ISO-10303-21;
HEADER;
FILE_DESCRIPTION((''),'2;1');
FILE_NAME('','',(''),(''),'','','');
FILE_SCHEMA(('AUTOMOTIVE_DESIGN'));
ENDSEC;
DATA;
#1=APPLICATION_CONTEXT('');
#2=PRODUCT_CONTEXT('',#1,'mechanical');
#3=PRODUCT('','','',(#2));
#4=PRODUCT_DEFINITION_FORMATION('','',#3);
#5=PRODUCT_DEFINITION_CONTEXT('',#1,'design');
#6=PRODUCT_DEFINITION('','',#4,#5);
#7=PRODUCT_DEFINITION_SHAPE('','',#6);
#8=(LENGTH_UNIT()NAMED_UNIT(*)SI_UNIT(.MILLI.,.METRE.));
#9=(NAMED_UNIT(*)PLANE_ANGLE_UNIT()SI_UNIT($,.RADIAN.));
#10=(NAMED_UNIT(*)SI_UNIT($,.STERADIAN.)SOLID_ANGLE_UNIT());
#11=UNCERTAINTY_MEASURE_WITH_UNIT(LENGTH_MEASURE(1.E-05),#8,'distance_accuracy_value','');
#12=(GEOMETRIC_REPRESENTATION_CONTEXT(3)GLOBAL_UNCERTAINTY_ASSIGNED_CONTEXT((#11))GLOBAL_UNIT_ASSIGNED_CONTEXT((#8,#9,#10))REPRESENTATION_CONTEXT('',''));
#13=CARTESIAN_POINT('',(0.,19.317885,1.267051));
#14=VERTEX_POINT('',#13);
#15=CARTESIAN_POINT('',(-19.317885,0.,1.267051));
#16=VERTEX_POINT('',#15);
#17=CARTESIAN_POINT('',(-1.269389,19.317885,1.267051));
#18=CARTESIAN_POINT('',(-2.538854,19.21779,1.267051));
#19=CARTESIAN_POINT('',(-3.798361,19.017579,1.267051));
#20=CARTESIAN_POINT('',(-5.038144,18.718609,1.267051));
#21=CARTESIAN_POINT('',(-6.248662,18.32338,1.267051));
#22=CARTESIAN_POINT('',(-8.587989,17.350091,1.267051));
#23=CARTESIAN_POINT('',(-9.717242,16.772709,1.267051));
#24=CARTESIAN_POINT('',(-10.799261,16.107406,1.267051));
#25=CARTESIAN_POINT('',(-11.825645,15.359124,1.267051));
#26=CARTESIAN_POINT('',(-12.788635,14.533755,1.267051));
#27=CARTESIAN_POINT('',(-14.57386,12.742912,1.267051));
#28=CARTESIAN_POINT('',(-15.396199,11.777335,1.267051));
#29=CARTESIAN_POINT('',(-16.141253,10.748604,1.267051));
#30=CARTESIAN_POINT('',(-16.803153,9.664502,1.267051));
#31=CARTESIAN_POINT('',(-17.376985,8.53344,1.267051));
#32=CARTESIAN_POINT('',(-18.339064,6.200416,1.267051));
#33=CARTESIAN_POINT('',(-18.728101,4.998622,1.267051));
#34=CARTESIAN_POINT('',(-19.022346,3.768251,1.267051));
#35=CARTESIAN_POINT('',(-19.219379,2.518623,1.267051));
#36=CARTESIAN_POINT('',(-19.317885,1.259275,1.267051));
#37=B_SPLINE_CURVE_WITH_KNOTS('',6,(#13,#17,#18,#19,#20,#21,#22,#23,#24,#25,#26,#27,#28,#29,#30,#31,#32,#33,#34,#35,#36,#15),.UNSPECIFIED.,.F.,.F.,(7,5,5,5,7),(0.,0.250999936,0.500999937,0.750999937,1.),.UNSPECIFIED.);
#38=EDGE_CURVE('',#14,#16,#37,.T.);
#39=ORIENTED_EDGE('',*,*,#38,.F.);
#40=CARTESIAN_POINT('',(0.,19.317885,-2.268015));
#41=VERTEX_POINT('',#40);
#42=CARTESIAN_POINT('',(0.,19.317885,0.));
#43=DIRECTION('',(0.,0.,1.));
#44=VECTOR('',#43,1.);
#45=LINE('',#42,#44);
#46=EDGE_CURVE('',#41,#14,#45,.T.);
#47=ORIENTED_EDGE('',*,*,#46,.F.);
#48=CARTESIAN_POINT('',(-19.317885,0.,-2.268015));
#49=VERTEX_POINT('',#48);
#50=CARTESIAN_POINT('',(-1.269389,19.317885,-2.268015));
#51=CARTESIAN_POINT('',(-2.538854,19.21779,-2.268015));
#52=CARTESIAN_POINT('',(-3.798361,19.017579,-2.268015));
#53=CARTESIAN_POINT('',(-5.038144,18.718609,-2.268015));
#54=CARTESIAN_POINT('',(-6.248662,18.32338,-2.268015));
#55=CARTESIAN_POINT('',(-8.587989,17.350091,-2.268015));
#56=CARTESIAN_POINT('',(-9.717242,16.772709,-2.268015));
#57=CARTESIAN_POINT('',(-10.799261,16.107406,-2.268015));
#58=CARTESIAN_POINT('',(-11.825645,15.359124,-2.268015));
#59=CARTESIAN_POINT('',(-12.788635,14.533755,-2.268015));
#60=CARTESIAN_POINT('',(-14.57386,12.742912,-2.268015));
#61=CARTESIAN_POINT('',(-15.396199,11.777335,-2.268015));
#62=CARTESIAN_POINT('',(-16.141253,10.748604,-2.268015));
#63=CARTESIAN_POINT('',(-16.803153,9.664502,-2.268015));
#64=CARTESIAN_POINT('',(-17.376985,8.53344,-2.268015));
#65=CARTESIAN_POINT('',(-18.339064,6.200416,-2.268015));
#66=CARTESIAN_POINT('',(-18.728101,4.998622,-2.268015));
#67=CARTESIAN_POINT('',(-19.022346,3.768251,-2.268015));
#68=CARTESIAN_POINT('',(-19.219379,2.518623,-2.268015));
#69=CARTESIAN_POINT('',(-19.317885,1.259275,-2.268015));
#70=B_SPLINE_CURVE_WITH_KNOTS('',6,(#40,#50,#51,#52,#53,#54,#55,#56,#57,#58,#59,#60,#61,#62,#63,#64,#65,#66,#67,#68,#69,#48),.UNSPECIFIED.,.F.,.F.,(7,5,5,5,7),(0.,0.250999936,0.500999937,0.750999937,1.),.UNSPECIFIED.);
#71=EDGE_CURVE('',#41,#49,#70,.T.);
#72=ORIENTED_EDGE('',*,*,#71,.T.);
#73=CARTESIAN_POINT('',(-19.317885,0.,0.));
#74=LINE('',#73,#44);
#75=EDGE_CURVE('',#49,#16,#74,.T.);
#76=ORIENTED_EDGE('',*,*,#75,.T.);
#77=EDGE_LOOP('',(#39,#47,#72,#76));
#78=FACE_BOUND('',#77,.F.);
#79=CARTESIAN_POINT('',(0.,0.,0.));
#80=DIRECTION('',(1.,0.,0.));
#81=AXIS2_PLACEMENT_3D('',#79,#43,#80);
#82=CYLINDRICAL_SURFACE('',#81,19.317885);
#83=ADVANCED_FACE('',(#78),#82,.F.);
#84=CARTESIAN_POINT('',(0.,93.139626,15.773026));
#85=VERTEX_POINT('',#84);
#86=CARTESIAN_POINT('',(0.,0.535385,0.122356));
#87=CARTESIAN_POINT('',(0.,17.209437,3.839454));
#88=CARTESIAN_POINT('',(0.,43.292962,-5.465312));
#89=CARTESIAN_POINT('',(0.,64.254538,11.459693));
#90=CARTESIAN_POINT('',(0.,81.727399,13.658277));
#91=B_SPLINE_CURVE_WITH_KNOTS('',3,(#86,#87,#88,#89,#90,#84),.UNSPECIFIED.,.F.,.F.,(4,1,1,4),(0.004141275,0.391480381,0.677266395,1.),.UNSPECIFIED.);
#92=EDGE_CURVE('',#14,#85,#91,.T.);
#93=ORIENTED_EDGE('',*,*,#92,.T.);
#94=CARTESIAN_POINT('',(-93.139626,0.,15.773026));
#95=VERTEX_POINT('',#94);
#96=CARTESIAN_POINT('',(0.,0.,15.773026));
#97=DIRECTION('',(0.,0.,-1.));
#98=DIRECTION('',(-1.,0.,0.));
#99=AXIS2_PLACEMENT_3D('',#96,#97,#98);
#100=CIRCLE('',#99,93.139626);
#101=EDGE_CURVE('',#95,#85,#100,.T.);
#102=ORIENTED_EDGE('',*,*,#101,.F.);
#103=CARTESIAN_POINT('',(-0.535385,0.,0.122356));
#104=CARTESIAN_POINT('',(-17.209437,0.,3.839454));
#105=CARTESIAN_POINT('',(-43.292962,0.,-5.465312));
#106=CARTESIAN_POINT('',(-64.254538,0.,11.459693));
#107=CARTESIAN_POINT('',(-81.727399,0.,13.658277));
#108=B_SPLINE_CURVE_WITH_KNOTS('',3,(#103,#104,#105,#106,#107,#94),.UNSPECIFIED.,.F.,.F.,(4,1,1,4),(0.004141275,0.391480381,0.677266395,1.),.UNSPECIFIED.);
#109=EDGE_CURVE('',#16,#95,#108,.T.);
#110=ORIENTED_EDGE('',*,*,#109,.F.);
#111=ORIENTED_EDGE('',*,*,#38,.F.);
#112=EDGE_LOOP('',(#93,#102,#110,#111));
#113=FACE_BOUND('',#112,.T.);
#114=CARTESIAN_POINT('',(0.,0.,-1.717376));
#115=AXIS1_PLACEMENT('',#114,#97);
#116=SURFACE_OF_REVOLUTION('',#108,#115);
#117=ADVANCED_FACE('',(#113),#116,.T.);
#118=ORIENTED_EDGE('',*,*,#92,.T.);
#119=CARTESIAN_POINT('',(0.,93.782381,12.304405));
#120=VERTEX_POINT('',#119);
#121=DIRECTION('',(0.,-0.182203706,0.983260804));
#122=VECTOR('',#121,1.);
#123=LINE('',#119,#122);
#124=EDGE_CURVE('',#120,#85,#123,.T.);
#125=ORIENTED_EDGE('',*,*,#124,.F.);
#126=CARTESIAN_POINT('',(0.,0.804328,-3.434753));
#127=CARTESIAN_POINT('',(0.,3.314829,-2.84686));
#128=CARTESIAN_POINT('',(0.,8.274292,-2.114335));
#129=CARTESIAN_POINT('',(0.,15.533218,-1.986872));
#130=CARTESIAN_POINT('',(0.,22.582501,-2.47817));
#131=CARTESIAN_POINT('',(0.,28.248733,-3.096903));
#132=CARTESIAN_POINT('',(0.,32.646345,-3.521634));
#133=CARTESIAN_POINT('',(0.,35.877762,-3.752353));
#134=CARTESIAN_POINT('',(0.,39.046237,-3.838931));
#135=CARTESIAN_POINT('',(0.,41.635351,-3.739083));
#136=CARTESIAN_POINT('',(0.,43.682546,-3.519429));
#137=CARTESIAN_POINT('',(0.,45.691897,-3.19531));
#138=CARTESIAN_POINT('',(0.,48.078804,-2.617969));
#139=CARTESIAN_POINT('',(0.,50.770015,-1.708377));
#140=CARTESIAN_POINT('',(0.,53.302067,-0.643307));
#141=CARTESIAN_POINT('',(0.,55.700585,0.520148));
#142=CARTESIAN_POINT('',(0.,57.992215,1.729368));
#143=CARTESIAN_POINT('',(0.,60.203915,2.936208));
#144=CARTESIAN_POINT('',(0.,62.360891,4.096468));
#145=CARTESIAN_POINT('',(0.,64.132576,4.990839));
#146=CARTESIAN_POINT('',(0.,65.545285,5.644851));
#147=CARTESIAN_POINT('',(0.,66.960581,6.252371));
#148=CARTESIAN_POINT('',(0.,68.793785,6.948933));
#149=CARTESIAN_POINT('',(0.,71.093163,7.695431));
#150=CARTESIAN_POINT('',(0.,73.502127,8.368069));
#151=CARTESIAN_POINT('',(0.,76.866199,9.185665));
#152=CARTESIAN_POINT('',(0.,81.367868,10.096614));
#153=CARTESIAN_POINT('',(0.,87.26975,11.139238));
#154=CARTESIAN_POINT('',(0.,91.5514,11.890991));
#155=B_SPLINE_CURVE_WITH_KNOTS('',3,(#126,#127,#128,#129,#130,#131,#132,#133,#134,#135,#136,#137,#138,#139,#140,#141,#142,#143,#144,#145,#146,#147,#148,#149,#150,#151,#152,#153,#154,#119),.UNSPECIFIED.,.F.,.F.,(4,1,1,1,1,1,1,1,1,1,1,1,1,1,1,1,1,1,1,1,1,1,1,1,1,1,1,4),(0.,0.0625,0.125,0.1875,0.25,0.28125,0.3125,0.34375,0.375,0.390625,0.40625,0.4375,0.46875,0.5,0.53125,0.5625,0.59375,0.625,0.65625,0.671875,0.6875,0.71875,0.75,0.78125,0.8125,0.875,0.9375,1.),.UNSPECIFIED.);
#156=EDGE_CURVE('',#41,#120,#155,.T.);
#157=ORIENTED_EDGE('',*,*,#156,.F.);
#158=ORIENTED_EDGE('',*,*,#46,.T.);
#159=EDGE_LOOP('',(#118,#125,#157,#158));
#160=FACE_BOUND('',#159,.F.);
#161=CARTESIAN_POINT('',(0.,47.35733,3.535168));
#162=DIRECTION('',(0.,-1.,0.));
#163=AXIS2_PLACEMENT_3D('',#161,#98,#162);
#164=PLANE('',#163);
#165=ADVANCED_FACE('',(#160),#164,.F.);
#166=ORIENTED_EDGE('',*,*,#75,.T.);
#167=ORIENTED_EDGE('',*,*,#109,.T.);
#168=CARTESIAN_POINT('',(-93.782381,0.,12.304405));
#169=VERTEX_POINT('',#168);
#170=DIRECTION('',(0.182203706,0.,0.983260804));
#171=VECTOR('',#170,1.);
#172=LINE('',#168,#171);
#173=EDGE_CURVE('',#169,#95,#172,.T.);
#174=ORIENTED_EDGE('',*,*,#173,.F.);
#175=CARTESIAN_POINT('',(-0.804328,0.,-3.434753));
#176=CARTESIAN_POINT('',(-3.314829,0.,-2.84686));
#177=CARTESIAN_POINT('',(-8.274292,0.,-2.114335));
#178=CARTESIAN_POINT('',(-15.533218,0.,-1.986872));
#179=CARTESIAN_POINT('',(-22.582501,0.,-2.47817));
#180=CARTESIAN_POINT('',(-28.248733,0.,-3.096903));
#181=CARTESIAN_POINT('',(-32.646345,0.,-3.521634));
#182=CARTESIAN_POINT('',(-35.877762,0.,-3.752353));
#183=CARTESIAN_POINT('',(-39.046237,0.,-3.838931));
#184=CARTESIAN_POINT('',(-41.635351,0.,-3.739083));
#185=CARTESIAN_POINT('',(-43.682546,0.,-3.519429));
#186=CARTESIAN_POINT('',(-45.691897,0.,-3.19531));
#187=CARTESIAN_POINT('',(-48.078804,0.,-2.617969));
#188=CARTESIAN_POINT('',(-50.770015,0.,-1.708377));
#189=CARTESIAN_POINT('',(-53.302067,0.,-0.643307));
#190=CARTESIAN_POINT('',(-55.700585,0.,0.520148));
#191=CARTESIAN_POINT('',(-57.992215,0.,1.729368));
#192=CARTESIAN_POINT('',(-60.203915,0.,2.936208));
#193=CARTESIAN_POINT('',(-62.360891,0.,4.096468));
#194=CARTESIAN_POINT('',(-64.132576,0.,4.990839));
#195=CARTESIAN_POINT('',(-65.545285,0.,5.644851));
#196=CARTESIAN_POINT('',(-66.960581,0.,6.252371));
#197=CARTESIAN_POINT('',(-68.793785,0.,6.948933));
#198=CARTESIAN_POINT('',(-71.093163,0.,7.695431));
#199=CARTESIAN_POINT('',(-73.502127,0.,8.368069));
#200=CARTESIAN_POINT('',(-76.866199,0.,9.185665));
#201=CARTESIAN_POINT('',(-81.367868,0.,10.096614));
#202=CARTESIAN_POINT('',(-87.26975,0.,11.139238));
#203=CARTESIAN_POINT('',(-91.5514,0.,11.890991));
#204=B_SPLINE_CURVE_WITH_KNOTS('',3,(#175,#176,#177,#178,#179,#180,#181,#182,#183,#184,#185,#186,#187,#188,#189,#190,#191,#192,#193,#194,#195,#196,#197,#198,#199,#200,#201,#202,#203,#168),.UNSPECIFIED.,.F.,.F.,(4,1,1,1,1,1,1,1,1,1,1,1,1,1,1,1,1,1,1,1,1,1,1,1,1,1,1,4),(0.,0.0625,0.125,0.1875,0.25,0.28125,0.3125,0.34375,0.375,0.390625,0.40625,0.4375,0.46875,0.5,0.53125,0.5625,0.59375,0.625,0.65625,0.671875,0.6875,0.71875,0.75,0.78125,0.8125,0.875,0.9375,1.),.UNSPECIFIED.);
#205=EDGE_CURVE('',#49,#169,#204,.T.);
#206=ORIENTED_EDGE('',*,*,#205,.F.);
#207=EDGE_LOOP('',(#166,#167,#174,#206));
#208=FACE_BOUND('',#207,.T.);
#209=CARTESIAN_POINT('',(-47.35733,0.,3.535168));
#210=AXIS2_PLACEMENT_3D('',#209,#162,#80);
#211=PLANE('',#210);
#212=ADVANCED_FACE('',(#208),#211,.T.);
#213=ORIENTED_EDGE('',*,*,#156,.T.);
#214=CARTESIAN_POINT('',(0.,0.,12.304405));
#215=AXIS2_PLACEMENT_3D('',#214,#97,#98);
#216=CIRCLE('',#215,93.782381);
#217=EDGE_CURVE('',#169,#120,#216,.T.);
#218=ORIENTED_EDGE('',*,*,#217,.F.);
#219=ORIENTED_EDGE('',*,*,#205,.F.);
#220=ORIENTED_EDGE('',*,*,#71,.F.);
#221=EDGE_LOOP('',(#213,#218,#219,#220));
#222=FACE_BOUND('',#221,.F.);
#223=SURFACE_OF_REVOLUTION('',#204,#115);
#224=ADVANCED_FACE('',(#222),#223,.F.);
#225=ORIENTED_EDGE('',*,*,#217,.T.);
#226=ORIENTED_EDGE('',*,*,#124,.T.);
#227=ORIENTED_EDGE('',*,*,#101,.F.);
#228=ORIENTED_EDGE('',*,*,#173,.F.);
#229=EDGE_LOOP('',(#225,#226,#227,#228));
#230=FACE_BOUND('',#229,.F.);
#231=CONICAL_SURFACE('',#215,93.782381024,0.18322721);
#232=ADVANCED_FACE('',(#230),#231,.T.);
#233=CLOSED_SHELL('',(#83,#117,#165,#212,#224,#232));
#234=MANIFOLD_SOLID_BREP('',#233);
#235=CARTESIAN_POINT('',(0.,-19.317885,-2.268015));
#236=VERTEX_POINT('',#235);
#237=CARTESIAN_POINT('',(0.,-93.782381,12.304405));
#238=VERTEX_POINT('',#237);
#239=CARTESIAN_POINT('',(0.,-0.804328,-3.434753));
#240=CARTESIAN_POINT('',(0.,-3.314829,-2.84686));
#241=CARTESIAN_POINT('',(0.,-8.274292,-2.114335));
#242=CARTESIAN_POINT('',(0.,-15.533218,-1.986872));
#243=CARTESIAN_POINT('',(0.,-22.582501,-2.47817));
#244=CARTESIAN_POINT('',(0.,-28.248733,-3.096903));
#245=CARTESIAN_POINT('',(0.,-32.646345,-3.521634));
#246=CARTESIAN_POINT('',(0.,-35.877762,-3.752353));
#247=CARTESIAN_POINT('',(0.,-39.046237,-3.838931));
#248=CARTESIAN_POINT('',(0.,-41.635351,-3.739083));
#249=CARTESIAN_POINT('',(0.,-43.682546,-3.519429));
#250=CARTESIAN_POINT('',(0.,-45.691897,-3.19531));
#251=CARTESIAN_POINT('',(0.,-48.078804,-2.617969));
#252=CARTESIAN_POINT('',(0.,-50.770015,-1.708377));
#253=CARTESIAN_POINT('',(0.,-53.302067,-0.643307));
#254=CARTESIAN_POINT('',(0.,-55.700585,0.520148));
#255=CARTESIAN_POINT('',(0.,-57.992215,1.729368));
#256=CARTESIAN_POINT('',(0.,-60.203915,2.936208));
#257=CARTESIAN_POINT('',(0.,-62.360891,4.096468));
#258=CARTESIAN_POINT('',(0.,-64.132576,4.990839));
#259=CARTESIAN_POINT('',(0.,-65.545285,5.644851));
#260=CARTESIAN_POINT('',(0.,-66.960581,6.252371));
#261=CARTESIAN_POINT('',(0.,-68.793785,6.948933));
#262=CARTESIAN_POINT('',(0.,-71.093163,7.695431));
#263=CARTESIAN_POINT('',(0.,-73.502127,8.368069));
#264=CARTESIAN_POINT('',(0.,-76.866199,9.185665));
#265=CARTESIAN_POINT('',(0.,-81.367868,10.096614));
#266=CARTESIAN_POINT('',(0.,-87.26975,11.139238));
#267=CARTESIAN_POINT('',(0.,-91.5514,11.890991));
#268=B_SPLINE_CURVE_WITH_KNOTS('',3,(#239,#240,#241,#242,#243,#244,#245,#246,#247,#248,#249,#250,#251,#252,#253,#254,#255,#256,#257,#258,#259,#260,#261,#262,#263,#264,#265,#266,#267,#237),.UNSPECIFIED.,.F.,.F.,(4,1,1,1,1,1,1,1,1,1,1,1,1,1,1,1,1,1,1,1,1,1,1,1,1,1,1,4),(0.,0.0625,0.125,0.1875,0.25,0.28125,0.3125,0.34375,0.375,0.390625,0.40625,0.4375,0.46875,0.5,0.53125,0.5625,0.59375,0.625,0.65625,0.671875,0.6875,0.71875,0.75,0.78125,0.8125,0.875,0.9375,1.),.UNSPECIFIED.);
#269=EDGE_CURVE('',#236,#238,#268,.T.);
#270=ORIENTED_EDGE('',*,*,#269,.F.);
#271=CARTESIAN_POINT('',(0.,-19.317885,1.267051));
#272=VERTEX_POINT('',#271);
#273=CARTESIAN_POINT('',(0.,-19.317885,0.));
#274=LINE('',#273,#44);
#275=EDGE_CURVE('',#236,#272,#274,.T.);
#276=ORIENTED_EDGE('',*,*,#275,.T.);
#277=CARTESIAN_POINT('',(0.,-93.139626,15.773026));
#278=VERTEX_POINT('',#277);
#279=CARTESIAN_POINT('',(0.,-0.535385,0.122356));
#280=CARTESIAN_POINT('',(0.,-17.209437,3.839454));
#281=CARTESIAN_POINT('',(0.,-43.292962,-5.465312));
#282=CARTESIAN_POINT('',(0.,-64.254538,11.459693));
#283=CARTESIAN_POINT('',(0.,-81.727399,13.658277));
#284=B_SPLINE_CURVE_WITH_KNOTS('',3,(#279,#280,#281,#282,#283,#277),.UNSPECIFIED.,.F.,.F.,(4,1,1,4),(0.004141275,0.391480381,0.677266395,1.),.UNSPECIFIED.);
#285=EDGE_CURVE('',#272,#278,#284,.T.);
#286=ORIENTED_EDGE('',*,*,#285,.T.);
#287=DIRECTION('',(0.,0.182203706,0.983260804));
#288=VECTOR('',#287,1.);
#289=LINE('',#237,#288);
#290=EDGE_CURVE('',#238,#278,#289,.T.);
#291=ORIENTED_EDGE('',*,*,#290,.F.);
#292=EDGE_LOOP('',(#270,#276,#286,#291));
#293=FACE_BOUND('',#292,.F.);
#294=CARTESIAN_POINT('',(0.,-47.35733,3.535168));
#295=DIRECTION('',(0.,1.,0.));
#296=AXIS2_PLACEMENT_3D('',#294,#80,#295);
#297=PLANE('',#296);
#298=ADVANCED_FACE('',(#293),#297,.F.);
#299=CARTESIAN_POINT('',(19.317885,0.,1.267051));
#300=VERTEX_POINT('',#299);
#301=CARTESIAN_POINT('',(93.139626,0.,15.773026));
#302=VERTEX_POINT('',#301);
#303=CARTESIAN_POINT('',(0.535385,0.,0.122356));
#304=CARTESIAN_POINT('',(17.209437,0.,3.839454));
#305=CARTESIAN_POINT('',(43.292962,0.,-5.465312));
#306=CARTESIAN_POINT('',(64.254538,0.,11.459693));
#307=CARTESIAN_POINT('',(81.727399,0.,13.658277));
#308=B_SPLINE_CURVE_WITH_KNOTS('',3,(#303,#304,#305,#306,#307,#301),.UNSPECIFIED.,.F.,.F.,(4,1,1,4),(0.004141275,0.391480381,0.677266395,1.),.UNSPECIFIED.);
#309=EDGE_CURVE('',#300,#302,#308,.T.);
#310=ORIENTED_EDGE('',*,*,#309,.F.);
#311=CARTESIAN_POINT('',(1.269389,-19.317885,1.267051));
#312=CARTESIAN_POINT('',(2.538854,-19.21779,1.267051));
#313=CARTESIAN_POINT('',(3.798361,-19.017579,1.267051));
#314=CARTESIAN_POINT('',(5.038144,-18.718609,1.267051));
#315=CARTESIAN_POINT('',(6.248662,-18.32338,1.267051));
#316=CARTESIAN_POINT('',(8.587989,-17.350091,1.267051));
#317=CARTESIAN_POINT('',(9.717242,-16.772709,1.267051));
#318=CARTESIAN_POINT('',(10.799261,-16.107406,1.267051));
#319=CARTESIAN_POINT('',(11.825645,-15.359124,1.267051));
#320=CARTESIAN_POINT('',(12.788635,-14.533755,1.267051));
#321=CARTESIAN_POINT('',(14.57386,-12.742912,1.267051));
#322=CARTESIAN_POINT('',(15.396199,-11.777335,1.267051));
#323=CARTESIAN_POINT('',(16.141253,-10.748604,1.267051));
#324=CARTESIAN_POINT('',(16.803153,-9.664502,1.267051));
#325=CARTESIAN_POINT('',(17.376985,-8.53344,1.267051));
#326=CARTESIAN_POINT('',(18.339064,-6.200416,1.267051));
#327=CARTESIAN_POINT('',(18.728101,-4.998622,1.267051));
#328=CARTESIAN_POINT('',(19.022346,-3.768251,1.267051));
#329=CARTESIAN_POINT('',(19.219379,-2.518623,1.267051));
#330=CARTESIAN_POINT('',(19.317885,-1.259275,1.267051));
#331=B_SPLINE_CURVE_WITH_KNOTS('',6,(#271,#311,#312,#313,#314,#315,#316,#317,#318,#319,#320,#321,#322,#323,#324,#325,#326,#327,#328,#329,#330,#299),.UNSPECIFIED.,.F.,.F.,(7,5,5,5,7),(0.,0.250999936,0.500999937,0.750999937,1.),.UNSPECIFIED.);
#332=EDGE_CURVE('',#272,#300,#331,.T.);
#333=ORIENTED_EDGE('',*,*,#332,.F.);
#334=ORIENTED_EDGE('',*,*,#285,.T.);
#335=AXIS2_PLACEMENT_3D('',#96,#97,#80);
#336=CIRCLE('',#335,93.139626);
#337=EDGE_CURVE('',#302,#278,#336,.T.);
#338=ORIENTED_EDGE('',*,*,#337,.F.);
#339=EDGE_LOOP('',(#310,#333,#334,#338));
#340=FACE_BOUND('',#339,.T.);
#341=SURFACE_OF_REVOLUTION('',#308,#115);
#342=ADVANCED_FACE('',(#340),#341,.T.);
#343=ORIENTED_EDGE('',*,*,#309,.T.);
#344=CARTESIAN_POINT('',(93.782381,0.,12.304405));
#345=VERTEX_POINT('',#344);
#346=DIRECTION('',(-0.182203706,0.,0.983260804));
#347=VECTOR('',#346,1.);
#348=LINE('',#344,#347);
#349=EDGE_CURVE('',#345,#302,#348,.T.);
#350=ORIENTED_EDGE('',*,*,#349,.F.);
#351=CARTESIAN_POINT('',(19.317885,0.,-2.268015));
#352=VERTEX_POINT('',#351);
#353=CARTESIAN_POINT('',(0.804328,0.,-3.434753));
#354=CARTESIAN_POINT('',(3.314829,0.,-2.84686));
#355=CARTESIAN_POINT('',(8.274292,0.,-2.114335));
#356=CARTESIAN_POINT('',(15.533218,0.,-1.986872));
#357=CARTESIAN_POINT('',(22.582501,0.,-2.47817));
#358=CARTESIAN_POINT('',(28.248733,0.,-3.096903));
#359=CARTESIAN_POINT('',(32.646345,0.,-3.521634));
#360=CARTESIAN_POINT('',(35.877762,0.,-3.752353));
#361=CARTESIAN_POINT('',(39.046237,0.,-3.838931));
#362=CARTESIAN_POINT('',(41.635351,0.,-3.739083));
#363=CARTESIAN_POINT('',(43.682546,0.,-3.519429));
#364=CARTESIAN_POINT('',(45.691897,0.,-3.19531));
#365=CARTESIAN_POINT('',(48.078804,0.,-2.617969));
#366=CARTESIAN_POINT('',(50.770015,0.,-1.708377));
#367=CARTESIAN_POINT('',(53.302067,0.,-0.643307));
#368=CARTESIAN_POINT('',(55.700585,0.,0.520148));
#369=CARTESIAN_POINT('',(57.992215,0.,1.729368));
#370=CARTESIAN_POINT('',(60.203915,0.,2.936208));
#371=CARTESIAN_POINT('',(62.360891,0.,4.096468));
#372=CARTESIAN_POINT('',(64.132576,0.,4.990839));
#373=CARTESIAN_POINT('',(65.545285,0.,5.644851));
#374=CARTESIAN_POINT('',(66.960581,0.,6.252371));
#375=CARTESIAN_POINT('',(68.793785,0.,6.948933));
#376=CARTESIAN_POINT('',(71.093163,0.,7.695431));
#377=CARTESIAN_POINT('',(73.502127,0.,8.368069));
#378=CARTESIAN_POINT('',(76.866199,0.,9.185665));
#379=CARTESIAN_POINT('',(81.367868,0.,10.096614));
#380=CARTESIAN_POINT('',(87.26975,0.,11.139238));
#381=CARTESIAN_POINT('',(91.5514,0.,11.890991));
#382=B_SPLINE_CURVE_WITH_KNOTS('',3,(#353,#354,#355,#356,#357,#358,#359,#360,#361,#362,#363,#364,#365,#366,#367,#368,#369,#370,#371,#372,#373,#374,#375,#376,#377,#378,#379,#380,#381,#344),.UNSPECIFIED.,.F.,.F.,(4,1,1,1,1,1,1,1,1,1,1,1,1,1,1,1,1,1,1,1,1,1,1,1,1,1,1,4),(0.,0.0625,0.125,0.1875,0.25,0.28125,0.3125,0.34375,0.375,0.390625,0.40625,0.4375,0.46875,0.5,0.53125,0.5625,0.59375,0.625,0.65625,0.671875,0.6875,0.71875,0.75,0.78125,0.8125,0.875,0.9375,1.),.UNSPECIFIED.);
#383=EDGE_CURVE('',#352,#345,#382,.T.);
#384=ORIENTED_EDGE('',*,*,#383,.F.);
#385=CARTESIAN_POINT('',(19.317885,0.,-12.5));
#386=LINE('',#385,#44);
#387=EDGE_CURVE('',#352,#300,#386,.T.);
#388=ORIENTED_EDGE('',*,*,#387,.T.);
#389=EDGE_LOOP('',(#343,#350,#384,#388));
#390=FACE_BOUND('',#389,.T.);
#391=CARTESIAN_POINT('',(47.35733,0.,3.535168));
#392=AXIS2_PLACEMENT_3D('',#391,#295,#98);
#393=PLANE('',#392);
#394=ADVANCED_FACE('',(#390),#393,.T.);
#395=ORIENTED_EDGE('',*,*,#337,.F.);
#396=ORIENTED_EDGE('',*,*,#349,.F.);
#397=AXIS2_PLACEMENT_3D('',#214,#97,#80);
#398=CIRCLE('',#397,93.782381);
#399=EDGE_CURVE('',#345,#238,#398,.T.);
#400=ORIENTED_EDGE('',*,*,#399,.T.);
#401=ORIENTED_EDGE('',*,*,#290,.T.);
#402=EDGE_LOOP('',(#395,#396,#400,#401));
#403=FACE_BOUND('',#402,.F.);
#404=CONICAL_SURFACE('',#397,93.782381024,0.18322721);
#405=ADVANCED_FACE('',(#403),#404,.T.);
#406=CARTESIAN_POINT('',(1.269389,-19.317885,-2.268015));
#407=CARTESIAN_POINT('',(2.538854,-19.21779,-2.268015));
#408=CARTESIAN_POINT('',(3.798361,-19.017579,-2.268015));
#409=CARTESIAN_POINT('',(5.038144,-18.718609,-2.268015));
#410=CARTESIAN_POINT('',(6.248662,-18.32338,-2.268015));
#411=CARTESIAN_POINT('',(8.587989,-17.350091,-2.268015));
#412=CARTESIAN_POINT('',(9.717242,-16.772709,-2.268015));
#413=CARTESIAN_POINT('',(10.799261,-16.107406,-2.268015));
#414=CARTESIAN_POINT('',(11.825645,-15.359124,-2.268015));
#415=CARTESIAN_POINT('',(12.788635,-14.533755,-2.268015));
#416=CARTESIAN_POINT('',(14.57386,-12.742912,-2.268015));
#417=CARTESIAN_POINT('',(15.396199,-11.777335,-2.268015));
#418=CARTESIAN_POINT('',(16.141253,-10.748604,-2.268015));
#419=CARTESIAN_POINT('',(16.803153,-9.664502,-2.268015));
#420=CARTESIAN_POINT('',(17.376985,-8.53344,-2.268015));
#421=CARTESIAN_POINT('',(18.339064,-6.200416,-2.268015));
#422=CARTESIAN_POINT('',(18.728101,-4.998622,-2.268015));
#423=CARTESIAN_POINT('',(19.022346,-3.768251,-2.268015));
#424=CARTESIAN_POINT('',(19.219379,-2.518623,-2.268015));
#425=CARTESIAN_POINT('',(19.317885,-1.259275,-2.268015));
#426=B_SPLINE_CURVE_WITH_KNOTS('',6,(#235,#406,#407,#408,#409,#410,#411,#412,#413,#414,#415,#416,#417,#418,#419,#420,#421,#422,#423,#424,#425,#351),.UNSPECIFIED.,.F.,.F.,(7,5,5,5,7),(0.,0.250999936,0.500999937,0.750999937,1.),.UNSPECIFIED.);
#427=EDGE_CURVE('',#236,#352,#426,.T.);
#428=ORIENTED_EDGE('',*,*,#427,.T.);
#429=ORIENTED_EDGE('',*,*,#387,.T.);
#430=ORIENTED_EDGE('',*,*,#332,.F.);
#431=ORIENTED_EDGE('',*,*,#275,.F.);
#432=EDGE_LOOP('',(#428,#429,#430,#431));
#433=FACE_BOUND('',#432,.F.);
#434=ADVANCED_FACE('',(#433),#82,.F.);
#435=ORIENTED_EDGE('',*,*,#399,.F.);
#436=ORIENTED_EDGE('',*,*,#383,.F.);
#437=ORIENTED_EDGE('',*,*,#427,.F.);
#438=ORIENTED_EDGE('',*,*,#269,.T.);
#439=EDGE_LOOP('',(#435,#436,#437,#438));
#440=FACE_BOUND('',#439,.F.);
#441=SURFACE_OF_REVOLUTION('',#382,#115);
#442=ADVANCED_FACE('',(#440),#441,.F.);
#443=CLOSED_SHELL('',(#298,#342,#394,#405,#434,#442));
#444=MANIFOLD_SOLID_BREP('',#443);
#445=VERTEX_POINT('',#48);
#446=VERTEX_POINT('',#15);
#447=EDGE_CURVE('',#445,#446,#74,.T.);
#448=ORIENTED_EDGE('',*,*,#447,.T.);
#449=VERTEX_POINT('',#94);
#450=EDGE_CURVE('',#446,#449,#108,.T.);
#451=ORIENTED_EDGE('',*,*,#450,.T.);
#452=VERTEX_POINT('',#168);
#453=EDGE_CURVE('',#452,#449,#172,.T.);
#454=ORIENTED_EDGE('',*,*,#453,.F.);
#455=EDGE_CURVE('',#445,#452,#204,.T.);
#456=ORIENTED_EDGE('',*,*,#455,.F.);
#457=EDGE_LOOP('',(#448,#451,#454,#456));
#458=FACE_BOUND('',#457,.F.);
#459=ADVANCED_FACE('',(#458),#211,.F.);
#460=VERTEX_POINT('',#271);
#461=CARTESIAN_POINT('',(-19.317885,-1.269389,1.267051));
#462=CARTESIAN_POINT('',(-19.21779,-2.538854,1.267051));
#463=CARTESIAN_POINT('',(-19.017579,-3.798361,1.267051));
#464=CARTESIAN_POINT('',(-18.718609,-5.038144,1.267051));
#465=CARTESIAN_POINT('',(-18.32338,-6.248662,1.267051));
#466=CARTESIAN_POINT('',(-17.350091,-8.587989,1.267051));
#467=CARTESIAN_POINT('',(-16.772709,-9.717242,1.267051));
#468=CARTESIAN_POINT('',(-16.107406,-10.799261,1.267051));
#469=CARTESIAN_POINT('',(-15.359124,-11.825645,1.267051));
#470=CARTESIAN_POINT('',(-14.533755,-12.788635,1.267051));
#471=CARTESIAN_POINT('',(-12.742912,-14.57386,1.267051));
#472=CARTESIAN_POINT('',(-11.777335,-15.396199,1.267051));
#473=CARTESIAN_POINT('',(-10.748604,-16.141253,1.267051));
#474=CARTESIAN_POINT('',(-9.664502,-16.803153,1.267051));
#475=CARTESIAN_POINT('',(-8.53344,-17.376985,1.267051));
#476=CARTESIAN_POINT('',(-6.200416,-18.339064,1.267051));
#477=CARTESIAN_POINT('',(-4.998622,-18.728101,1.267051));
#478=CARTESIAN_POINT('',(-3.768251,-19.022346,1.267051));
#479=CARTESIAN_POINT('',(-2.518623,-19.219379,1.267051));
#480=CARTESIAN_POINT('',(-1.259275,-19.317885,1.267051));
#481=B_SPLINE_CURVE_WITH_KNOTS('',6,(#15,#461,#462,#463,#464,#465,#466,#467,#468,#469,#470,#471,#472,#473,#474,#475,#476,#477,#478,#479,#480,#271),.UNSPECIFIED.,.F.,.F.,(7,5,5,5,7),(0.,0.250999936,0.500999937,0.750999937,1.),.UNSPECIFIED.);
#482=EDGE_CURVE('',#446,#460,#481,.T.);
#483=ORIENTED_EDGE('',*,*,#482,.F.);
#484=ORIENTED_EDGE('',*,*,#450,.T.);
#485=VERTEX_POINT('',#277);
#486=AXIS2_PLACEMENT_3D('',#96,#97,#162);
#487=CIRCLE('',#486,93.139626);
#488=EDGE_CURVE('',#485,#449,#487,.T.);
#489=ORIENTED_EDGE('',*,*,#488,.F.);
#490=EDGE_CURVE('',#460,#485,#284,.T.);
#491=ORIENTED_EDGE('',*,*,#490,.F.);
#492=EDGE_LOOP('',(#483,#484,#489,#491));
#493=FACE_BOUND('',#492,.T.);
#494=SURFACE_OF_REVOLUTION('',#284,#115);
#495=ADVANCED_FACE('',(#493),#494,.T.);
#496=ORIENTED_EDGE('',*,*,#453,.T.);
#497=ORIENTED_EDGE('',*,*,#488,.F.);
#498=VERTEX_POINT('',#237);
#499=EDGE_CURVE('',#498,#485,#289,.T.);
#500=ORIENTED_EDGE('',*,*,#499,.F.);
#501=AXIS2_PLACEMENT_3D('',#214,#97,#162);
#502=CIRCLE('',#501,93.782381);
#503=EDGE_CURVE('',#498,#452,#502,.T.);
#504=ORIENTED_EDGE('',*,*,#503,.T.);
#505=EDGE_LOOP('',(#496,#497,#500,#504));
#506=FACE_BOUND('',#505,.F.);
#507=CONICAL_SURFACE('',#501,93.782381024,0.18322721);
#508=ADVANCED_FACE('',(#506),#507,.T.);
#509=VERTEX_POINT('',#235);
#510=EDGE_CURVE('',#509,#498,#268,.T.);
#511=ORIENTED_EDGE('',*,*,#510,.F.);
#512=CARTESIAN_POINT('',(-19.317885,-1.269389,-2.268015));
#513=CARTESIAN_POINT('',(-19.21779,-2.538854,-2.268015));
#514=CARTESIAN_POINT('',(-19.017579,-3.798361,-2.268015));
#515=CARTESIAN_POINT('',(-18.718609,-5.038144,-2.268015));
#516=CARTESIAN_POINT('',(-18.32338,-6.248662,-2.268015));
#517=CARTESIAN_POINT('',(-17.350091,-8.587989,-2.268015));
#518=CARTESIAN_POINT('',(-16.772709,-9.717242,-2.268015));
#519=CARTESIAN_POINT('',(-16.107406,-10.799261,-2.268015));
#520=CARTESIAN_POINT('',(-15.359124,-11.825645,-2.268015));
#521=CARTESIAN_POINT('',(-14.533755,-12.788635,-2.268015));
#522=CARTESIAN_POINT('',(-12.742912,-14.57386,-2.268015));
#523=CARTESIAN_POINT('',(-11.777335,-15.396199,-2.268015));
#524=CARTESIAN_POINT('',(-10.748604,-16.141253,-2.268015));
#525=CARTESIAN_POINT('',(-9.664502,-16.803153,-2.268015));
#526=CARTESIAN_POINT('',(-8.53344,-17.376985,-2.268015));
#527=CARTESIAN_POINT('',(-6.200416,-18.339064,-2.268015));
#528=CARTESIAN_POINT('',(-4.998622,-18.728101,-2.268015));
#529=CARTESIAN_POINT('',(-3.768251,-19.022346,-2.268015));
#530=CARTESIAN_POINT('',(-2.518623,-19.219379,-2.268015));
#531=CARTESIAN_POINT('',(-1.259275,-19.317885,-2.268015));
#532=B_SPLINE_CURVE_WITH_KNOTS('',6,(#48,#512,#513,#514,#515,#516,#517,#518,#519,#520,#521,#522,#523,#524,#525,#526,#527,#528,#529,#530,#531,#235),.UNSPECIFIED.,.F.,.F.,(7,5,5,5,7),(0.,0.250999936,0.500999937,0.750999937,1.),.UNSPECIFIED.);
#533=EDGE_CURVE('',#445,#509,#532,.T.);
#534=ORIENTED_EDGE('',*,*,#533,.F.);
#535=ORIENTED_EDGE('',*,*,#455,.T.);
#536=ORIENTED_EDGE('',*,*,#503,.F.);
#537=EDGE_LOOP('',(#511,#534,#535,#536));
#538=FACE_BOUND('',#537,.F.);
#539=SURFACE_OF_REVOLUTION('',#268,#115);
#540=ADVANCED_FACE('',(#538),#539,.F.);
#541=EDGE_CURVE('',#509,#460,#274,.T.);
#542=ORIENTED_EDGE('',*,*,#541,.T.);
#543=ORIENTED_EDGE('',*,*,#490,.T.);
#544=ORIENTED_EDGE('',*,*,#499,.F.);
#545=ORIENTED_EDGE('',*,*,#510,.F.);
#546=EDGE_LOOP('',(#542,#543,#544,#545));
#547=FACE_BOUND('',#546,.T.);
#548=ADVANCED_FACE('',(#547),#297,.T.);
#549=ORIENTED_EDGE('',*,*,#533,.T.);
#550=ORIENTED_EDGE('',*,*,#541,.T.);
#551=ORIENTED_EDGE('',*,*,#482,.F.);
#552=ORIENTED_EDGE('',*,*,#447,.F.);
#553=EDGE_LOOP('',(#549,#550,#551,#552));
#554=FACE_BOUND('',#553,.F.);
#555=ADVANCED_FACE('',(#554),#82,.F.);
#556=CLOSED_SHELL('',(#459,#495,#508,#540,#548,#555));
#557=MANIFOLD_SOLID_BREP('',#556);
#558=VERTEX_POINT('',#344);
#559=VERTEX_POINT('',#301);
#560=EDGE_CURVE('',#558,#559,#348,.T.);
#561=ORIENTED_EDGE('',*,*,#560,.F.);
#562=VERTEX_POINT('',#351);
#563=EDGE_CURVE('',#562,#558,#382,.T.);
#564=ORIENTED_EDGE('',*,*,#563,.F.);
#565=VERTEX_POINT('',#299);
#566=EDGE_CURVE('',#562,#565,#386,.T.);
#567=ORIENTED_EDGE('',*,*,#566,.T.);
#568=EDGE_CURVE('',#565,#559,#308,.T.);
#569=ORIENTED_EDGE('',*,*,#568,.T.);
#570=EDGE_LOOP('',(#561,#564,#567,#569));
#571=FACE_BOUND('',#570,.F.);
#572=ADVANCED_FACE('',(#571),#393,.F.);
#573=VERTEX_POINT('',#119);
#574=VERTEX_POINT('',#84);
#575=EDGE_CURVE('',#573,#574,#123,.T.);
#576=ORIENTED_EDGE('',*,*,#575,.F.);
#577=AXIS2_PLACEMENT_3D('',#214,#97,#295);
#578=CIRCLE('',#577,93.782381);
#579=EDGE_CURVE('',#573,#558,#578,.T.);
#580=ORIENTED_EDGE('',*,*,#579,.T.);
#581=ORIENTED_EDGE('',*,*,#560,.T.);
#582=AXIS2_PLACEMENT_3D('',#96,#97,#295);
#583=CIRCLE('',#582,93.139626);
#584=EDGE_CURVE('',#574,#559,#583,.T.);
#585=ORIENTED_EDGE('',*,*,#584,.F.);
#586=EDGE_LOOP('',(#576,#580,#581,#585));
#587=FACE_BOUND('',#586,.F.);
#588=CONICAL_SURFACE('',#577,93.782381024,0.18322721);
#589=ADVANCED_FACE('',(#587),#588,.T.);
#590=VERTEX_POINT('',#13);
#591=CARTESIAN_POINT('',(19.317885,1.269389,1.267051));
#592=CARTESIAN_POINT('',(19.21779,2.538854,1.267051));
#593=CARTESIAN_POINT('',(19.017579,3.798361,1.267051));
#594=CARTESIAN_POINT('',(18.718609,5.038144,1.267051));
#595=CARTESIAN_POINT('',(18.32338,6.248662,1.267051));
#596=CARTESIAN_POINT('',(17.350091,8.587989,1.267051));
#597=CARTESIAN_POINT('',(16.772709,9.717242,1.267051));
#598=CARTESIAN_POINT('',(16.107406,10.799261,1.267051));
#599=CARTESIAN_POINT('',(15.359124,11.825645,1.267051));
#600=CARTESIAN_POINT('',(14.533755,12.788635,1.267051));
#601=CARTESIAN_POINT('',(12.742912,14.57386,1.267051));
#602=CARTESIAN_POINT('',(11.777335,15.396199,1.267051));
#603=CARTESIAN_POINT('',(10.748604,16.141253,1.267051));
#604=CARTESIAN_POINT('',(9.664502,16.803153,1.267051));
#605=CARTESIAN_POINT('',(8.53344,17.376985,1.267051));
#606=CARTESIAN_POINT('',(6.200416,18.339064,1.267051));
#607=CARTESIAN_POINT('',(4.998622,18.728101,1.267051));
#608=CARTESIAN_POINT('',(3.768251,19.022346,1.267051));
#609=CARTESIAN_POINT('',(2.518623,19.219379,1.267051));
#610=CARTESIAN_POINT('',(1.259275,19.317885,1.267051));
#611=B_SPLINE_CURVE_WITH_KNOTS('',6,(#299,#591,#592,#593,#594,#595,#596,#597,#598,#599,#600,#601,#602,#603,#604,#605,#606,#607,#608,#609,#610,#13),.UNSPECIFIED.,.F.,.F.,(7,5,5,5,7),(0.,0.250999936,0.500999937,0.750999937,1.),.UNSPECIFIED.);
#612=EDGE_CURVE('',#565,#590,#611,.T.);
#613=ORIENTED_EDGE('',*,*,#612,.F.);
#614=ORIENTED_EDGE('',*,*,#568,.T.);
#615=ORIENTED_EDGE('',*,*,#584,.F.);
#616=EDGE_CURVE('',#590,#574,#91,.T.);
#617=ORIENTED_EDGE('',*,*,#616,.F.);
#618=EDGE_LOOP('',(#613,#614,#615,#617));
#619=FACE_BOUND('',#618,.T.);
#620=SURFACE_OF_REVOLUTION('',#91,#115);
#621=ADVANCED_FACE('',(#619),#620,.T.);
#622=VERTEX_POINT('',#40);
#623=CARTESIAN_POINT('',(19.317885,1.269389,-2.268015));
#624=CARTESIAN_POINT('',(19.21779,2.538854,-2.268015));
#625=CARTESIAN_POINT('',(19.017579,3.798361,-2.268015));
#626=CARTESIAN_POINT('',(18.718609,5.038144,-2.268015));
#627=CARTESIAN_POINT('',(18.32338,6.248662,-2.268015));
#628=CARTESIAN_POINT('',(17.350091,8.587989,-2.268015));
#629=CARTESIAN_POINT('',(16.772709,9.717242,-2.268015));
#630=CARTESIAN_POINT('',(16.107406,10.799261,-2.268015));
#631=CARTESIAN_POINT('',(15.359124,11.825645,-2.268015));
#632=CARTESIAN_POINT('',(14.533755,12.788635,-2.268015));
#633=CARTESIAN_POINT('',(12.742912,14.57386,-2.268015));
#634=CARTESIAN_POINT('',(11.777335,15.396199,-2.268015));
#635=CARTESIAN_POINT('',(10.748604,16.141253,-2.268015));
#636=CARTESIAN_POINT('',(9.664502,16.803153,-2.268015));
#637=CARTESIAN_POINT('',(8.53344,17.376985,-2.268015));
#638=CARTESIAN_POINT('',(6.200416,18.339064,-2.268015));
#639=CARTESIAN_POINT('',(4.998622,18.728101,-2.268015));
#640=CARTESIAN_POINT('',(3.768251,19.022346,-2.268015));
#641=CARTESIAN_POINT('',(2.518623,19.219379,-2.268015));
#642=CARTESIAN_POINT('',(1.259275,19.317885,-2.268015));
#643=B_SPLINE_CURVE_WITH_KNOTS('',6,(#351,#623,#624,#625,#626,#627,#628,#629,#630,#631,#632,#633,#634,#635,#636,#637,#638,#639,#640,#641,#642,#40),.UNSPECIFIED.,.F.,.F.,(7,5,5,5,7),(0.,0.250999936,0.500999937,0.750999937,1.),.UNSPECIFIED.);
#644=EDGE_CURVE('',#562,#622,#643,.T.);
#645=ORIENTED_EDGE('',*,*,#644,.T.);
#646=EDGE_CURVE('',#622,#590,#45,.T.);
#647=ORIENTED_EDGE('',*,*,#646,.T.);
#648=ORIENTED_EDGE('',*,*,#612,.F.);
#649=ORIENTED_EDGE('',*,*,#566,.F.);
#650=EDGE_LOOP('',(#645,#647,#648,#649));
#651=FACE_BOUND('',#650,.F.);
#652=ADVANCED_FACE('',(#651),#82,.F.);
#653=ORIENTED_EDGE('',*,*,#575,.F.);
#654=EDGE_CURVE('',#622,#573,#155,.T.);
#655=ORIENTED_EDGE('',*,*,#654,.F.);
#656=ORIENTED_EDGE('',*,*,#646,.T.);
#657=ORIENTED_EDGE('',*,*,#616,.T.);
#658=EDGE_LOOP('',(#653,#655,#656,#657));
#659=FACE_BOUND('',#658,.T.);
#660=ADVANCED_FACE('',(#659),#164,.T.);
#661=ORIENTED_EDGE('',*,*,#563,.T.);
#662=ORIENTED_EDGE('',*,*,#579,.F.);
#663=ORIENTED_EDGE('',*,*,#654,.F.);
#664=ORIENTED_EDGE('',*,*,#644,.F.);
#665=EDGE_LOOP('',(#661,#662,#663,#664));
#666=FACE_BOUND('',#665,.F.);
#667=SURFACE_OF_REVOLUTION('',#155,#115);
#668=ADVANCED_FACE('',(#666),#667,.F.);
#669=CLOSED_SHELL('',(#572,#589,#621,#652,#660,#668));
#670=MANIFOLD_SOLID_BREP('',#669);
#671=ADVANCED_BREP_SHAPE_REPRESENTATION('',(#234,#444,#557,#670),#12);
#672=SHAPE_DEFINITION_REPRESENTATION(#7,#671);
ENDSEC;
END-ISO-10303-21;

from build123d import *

# Parameters (mm, degrees)
F1_ANGLE        = 90
F1_COPIES_COUNT = 4
F2_R            = 19.3178847041
F3_DEPTH        = 12.5


# Not quite as in the source:
# - a feature of the source that left no trace in its solid (it failed there, or was rolled back) is left out
# - the dataset's text gives a spline's control points without its knots; the knots are read off the source's solid
# - a pattern or mirror of a feature is missing from the dataset's text; its kind, count and spacing are read off the source's solid


with BuildPart() as f1:
    # F0 (on Front) → F1 (revolve)
    with BuildSketch(Plane.XZ):
        with BuildLine():
            add(Edge.make_bspline(
                [(0.535384993, 0.1223555221), (17.2094367636, 3.8394536298), (43.2929624479, -5.465311782), (64.2545376437, 11.4596925852), (81.7273993655, 13.6582770662), (93.1396260858, 15.7730262727)],
                knots=[0.004141275, 0.004141275, 0.004141275, 0.004141275, 0.3914803814, 0.6772663946, 1, 1, 1, 1], degree=3))
            Line((0.535384993, 0.1223555221), (0.474259215, -3.4347528534))
            Line((0.474259215, -3.4347528534), (0.8043280011, -3.4347528534))
            add(Edge.make_bspline(
                [(0.8043280011, -3.4347528534), (3.3148291149, -2.8468600912), (8.2742920499, -2.1143351467), (15.5332184992, -1.9868717443), (22.5825008916, -2.4781703416), (28.248732939, -3.0969025959), (32.6463450247, -3.5216344609), (35.8777622406, -3.7523528033), (39.0462368261, -3.838931027), (41.6353513211, -3.7390833353), (43.6825461889, -3.5194285423), (45.6918972373, -3.1953102754), (48.0788038091, -2.6179690834), (50.7700150604, -1.7083774784), (53.3020669479, -0.643306801), (55.7005846476, 0.5201483357), (57.9922146811, 1.7293684368), (60.2039145986, 2.9362082665), (62.3608906754, 4.0964681393), (64.1325757078, 4.9908391226), (65.5452849821, 5.6448511365), (66.9605812541, 6.2523714935), (68.7937846142, 6.9489329742), (71.0931629092, 7.695431129), (73.5021272144, 8.3680692714), (76.8661994201, 9.1856648058), (81.3678679034, 10.0966139075), (87.2697497294, 11.1392380289), (91.5514001783, 11.890991348), (93.7823810236, 12.3044045309)],
                knots=[0, 0, 0, 0, 0.0625, 0.125, 0.1875, 0.25, 0.28125, 0.3125, 0.34375, 0.375, 0.390625, 0.40625, 0.4375, 0.46875, 0.5, 0.53125, 0.5625, 0.59375, 0.625, 0.65625, 0.671875, 0.6875, 0.71875, 0.75, 0.78125, 0.8125, 0.875, 0.9375, 1, 1, 1, 1], degree=3))
            Line((93.7823810236, 12.3044045309), (93.1396260858, 15.7730262727))
        make_face()
    revolve(axis=Axis((0, 0, -1.7173764267), (0, 0, -1)), revolution_arc=F1_ANGLE)


with BuildPart() as f1_copies_1:
    # F1_copies: instance of F1
    add(f1.part.rotate(Axis((0, 0, 0), (0, 0, 1)), 1 * 360 / F1_COPIES_COUNT))


with BuildPart() as f1_copies_2:
    # F1_copies: instance of F1
    add(f1.part.rotate(Axis((0, 0, 0), (0, 0, 1)), 2 * 360 / F1_COPIES_COUNT))


with BuildPart() as f1_copies_3:
    # F1_copies: instance of F1
    add(f1.part.rotate(Axis((0, 0, 0), (0, 0, 1)), 3 * 360 / F1_COPIES_COUNT))


with BuildPart() as f3_tool:
    # F2 (on Top) → F3 (new body, symmetric)
    with BuildSketch(Plane.XY):
        Circle(F2_R)
    extrude(amount=F3_DEPTH, both=True)


with BuildPart() as f1_1:
    add(f1.part)

    # F3: cut by f3_tool
    add(f3_tool.part, mode=Mode.SUBTRACT)


with BuildPart() as f1_copies_1_1:
    add(f1_copies_1.part)

    # F3: cut by f3_tool
    add(f3_tool.part, mode=Mode.SUBTRACT)


with BuildPart() as f1_copies_2_1:
    add(f1_copies_2.part)

    # F3: cut by f3_tool
    add(f3_tool.part, mode=Mode.SUBTRACT)


with BuildPart() as f1_copies_3_1:
    add(f1_copies_3.part)

    # F3: cut by f3_tool
    add(f3_tool.part, mode=Mode.SUBTRACT)


solid = Compound([f1_1.part, f1_copies_1_1.part, f1_copies_2_1.part, f1_copies_3_1.part])
